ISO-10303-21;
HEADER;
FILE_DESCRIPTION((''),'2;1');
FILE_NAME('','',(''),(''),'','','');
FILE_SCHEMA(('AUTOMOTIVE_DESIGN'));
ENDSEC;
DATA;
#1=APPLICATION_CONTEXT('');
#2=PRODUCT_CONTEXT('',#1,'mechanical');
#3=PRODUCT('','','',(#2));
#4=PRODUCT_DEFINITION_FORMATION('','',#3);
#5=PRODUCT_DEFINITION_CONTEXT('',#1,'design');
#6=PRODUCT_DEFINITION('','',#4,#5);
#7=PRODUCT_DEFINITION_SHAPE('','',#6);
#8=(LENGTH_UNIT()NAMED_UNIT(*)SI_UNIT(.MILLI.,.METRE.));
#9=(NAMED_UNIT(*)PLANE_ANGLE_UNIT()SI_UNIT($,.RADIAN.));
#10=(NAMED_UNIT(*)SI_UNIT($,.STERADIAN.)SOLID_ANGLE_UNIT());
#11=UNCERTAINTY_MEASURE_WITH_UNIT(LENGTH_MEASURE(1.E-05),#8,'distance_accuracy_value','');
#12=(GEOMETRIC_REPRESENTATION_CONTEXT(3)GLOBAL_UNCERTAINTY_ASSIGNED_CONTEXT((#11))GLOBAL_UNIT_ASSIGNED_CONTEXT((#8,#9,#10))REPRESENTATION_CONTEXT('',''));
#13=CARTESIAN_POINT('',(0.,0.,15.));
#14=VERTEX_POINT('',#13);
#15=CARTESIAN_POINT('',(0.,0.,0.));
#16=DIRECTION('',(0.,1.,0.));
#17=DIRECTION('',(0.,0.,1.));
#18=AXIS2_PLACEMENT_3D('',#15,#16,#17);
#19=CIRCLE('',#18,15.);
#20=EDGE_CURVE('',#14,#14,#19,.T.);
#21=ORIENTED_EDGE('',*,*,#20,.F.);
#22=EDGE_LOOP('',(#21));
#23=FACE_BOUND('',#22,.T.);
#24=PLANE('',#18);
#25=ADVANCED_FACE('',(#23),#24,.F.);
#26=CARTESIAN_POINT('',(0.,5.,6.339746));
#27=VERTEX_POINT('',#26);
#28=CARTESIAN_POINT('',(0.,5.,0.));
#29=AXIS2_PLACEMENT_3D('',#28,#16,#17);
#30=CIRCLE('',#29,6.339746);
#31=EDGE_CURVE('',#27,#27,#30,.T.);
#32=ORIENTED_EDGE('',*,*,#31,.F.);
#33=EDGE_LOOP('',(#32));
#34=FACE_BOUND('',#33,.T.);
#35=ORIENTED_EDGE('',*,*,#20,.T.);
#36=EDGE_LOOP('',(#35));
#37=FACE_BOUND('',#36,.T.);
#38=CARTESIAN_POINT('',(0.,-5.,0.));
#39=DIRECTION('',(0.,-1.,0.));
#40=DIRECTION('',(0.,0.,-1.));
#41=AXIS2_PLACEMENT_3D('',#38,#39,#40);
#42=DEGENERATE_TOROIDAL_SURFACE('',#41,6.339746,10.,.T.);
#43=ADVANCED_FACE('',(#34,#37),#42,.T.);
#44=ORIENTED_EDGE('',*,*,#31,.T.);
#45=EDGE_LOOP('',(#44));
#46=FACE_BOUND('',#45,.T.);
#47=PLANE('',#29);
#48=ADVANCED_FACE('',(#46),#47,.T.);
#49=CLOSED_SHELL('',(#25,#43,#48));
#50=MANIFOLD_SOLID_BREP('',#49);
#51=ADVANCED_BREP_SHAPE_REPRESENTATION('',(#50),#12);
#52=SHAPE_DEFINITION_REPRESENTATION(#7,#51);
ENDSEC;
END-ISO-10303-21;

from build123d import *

# Parameters (mm, degrees)
SKETCH1_R           = 15
BOSS_EXTRUDE1_DEPTH = 5
FILLET1_R           = 10


with BuildPart() as part:
    # Sketch1 → Boss-Extrude1 (new body)
    with BuildSketch(Plane(origin=(0, 0, 0), x_dir=(1, 0, 0), z_dir=(0, 1, 0))):
        with Locations(Location((0, 0, 0), (0, 0, 270))):
            Circle(SKETCH1_R)
    extrude(amount=BOSS_EXTRUDE1_DEPTH)

    # Fillet1
    # the kernel refuses this fillet: 10 mm, written as the material it takes off along each edge
    with BuildSketch(Plane(origin=(0, 5, 0), x_dir=(0, 0, 1), z_dir=(-1, 0, 0))) as fillet1_piece_1:
        with BuildLine():
            CenterArc((6.339745962, -10), FILLET1_R, 30, 60)
            Line((6.339745962, 0), (6.339745962, 0.2))
            Line((6.339745962, 0.2), (15, 0.2))
            Line((15, 0.2), (15.2, 0))
            ThreePointArc((15.2, 0), (15.2, -2.5), (15.173205081, -4.9))
            Line((15.173205081, -4.9), (15, -5))
        make_face()
    revolve(axis=Axis((0, 5, 0), (0, 1, 0)), mode=Mode.SUBTRACT)


solid = part.part
